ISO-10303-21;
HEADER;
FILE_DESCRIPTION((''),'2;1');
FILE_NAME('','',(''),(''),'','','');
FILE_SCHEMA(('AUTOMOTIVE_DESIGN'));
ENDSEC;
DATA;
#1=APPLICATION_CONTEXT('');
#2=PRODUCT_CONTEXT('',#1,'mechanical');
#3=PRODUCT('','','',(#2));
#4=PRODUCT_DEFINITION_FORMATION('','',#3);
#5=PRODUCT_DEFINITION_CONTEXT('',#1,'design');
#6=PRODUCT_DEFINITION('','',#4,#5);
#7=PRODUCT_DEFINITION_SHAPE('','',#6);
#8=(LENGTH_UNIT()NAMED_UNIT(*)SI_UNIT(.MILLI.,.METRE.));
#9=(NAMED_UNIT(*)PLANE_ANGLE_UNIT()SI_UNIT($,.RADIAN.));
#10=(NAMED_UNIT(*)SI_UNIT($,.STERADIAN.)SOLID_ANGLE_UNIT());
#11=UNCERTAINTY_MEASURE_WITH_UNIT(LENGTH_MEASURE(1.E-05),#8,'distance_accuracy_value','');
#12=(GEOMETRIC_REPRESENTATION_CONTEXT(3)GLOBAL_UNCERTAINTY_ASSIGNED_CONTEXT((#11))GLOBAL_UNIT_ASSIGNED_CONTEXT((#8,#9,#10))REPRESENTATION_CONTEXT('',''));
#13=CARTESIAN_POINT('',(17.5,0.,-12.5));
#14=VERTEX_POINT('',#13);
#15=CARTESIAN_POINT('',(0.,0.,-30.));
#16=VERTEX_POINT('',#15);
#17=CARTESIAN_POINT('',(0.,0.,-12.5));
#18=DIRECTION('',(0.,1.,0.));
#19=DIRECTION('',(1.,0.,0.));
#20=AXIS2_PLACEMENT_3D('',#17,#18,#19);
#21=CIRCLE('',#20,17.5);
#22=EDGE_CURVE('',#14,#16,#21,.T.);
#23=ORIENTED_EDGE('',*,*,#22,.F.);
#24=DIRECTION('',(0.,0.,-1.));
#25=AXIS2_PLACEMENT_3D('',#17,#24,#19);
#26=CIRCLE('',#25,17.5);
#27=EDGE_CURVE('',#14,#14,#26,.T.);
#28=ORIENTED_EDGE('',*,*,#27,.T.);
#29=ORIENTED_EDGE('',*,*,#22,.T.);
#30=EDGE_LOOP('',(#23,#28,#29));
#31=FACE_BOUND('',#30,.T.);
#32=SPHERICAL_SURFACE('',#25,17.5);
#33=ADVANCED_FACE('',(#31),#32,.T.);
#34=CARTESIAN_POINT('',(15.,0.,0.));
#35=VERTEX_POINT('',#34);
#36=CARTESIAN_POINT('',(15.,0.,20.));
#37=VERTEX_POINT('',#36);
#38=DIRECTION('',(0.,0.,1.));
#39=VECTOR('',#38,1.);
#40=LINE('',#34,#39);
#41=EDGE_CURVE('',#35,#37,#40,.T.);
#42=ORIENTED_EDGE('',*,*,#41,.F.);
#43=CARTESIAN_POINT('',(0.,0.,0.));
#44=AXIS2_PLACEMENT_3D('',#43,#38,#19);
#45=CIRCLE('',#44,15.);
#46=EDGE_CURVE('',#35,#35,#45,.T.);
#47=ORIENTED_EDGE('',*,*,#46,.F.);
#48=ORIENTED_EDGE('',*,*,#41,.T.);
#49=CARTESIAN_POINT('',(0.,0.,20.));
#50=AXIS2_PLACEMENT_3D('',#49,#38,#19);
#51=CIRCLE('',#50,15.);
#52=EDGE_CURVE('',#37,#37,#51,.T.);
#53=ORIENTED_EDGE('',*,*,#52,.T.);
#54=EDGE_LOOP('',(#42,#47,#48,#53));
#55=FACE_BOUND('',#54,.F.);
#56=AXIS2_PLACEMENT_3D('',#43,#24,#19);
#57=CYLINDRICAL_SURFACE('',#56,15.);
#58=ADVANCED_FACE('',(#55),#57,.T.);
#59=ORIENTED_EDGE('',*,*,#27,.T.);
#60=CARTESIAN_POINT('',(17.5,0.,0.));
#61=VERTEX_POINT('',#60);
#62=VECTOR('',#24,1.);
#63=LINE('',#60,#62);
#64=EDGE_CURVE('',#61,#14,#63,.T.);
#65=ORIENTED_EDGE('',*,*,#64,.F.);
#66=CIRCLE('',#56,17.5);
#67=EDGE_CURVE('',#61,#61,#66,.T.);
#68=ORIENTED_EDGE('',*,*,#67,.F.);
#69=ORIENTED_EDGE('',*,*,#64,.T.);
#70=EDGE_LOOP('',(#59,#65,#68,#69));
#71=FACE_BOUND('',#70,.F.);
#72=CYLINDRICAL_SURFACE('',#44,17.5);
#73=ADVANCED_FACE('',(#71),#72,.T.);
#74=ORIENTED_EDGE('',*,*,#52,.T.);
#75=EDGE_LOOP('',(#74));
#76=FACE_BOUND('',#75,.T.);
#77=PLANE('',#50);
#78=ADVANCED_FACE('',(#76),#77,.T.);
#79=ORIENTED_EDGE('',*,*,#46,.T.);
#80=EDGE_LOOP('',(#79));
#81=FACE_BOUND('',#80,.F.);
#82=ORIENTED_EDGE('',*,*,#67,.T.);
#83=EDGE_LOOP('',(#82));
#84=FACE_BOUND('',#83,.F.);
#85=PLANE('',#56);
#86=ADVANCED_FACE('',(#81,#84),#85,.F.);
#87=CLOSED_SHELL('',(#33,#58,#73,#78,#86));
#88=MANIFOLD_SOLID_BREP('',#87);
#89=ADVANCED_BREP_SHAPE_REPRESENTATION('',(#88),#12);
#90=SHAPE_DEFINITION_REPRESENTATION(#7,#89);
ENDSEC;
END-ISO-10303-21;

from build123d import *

# Parameters (mm, degrees)
F0_R     = 15
F1_DEPTH = 20
F2_R     = 17.5
F2_R_2   = 15
F3_DEPTH = 30
F5_R     = 17.5


with BuildPart() as f1:
    # F0 (on Top) → F1 (new body)
    with BuildSketch(Plane.XY):
        Circle(F0_R)
    extrude(amount=F1_DEPTH)

    # F2 (on face) → F3 (join)
    with BuildSketch(Plane(origin=(0, 0, 0), x_dir=(1, 0, 0), z_dir=(0, 0, -1))):
        Circle(F2_R)
        Circle(F2_R_2, mode=Mode.SUBTRACT)
        Circle(F2_R_2)
    extrude(amount=F3_DEPTH)

    # F5
    f5_edges = [f1.edges().sort_by_distance(p)[0] for p in [
        (-17.5, 0, -30),
    ]]
    fillet(f5_edges, radius=F5_R)


solid = f1.part
